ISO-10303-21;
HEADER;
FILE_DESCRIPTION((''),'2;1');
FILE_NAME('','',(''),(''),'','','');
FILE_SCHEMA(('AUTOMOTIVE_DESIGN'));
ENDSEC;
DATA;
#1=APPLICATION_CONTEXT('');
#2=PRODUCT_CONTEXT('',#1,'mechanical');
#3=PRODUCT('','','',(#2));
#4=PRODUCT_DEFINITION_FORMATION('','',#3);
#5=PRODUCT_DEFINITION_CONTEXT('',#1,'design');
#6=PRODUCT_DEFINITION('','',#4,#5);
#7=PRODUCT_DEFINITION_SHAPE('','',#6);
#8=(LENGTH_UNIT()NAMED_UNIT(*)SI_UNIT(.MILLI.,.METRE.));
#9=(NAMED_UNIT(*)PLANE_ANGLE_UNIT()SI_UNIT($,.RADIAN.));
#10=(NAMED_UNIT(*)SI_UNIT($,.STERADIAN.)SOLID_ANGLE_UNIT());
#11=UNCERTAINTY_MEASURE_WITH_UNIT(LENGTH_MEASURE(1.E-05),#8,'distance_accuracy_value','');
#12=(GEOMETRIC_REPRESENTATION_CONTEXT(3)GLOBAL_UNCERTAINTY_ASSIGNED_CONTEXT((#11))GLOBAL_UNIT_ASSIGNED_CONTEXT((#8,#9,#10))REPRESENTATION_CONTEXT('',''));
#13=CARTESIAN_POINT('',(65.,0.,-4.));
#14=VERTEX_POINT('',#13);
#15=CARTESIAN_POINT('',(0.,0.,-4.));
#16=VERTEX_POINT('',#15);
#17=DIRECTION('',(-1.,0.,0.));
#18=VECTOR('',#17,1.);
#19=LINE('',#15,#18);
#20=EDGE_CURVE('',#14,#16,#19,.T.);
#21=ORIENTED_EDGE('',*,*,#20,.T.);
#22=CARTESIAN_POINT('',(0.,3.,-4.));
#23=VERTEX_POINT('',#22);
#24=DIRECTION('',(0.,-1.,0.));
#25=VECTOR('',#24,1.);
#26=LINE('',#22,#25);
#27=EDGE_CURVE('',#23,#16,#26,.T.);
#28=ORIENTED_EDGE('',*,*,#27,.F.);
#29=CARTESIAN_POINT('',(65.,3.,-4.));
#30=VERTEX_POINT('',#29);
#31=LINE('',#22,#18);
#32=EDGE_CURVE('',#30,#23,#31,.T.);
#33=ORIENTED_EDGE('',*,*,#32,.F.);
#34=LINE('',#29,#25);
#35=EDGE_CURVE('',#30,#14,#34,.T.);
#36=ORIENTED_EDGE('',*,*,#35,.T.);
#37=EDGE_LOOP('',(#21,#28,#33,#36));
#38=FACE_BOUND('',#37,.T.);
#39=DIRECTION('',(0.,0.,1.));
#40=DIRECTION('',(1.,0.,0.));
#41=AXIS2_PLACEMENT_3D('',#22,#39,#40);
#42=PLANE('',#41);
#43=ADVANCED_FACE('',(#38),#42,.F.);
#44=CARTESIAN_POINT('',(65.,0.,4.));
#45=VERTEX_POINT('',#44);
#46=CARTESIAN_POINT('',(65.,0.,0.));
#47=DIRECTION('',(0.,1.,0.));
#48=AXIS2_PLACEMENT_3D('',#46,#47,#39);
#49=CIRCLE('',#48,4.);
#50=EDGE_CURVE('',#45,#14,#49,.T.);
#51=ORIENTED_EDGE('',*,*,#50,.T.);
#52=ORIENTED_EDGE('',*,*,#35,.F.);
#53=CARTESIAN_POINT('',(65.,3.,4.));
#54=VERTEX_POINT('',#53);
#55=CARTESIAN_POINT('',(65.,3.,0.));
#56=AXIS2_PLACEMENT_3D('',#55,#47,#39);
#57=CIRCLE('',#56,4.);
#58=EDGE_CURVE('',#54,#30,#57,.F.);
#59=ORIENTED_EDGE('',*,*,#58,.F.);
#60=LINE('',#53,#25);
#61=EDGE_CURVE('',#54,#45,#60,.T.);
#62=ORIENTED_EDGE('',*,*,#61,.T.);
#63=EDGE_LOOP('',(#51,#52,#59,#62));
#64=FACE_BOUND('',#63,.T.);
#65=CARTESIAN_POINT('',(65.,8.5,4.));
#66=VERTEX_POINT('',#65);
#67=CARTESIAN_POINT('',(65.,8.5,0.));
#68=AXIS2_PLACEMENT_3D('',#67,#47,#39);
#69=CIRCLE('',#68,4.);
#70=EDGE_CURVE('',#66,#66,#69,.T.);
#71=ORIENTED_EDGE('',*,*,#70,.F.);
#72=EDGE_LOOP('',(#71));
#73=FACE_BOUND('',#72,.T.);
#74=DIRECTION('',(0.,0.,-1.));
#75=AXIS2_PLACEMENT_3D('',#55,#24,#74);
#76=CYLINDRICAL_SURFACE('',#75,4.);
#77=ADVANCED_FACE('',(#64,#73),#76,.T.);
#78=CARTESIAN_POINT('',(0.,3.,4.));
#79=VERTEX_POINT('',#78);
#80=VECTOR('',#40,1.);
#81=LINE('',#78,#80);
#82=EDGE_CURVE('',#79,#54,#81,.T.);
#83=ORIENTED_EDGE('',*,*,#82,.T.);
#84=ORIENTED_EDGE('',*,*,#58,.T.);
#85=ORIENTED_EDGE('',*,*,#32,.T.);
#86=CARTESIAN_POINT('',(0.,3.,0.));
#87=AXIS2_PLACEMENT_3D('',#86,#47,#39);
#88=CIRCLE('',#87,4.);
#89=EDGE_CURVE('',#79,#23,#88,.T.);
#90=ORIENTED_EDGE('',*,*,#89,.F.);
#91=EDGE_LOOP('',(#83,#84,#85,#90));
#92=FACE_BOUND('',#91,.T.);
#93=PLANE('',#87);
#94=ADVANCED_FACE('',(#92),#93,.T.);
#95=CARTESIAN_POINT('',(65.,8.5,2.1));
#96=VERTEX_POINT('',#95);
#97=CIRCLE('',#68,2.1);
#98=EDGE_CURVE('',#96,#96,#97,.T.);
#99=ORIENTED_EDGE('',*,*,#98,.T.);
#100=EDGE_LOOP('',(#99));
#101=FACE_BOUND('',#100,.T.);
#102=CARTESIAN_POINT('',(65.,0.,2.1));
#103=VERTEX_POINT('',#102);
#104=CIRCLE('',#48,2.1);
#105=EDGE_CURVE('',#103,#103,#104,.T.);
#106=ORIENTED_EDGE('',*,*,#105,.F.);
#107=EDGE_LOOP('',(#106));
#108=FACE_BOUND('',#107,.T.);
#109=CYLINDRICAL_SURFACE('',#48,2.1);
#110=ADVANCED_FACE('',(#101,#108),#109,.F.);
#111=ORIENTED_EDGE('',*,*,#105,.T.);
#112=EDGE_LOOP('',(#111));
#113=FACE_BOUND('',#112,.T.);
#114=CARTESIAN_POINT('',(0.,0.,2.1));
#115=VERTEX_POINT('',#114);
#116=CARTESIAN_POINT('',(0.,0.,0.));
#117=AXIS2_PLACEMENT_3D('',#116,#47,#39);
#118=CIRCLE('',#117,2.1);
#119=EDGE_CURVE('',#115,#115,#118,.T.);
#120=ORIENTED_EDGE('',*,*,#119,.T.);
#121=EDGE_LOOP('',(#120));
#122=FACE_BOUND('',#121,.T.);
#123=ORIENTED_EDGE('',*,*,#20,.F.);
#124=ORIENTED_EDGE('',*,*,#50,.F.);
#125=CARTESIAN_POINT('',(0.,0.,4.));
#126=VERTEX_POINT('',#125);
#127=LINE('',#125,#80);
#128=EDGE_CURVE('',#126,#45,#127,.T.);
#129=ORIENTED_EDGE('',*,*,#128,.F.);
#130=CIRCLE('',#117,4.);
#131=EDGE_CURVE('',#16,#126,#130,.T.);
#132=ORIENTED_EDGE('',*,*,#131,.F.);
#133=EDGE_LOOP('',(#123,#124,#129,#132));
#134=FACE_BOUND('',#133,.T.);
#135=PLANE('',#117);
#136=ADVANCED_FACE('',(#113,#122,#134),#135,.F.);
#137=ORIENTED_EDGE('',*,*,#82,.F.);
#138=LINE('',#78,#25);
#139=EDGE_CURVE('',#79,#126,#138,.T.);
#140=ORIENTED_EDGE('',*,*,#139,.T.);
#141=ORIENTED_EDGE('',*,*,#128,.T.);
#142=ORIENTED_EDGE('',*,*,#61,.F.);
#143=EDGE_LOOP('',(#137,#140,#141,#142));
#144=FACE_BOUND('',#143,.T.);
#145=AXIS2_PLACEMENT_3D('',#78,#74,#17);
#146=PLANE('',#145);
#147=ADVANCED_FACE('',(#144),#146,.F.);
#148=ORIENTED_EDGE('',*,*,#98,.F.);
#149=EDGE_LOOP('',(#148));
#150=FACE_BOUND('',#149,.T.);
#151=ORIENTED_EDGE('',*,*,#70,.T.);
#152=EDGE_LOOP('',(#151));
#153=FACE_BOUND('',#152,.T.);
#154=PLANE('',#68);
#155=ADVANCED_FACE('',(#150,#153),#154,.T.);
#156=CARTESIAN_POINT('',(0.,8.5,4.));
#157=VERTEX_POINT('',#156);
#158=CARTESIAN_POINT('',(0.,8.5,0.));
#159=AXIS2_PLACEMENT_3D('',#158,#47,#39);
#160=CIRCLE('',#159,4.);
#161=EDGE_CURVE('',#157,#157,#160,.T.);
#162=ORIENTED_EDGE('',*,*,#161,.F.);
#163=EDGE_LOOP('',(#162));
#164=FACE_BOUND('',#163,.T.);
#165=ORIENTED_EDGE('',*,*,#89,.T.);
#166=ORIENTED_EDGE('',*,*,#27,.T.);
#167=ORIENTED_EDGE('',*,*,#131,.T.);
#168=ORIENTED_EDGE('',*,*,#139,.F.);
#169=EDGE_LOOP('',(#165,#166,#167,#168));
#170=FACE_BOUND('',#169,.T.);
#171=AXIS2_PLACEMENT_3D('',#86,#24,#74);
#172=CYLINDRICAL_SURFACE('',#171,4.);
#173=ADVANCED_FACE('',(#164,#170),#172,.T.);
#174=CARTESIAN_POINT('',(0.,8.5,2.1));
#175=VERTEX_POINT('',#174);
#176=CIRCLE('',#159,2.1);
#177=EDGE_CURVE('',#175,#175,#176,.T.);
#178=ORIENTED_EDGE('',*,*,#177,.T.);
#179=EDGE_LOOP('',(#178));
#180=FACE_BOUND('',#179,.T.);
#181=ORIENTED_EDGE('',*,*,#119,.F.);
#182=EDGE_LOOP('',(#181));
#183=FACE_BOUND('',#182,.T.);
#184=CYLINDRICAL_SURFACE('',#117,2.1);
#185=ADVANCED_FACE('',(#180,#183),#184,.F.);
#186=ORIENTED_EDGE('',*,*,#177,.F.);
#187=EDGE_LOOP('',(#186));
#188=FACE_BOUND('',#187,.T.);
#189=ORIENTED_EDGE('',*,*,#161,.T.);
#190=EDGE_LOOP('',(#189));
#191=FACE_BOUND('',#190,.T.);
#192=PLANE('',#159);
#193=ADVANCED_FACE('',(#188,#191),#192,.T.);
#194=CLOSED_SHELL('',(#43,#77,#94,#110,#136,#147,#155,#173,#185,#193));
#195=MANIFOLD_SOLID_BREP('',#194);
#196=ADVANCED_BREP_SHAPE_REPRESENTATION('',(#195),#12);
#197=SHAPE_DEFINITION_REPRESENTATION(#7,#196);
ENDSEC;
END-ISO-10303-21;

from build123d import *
from build123d.topology import SkipClean

# Parameters (mm, degrees)
BOSS_EXTRUDE1_DEPTH = 3
SKETCH3_R           = 4
BOSS_EXTRUDE2_DEPTH = 5.5
SKETCH4_R           = 2.1
CUT_EXTRUDE1_DEPTH  = 70.636556492


with BuildPart() as part:
    # Sketch1 → Boss-Extrude1 (new body)
    with BuildSketch(Plane(origin=(0, 0, 0), x_dir=(1, 0, 0), z_dir=(0, 1, 0))):
        with BuildLine():
            Line((0, 4), (65, 4))
            ThreePointArc((65, 4), (69, 0), (65, -4))
            Line((65, -4), (0, -4))
            ThreePointArc((0, -4), (-4, 0), (0, 4))
        make_face()
    extrude(amount=BOSS_EXTRUDE1_DEPTH)

    # Sketch3 → Boss-Extrude2 (add)
    with SkipClean():  # the faces are left unmerged after this step: merging them gives an invalid solid
        with BuildSketch(Plane(origin=(0, 3, 0), x_dir=(1, 0, 0), z_dir=(0, 1, 0))):
            Circle(SKETCH3_R)
            with Locations((65, 0)):
                Circle(SKETCH3_R)
        extrude(amount=BOSS_EXTRUDE2_DEPTH)

    # Sketch4 → Cut-Extrude1 (cut, through all)
    with SkipClean():  # the faces are left unmerged after this step: merging them gives an invalid solid
        with BuildSketch(Plane(origin=(0, 8.5, 0), x_dir=(1, 0, 0), z_dir=(0, 1, 0))):
            Circle(SKETCH4_R)
            with Locations((65, 0)):
                Circle(SKETCH4_R)
        extrude(amount=-CUT_EXTRUDE1_DEPTH, mode=Mode.SUBTRACT)


solid = part.part
